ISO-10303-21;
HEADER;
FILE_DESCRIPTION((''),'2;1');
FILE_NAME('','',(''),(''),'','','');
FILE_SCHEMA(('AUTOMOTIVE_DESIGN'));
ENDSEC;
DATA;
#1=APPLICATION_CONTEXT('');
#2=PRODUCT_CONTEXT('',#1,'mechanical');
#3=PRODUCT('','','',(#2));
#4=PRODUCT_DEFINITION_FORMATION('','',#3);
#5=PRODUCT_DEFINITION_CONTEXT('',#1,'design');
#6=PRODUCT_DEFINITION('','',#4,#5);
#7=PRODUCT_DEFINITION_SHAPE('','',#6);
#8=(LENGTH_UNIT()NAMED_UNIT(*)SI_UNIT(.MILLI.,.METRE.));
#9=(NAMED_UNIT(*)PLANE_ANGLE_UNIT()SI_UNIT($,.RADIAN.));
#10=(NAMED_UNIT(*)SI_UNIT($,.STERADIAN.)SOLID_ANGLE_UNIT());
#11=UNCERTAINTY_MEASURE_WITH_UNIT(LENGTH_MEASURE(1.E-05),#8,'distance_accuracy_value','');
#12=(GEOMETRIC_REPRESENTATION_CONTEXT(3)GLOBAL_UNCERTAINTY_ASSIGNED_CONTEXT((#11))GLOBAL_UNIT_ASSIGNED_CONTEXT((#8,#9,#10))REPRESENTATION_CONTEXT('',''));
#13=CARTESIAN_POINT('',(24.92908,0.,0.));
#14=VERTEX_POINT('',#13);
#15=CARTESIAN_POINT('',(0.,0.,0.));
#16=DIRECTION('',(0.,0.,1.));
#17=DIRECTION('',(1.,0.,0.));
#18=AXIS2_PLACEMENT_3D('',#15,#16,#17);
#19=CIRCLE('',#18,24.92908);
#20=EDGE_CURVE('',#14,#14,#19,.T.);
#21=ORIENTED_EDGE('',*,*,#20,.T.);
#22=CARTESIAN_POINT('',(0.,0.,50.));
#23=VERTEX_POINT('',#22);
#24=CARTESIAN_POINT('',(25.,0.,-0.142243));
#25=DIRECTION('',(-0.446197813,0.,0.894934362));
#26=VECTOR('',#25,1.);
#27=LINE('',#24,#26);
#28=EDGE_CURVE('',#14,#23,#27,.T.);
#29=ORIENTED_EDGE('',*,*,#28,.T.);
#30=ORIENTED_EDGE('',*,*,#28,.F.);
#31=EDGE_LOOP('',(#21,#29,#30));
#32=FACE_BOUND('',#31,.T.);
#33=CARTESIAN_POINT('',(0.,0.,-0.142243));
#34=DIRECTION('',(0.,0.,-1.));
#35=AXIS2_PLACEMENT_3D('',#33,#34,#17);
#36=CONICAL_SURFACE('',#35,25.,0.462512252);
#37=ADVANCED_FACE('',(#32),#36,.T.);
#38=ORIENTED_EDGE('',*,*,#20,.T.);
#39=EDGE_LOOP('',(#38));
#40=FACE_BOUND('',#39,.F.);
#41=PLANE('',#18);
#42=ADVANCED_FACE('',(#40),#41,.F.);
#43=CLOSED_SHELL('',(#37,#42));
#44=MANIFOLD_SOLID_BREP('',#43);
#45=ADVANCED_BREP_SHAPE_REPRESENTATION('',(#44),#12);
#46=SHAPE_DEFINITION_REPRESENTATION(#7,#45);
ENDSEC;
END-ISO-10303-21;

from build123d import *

# Parameters (mm, degrees)
F0_R     = 25
F1_DEPTH = 50


# Not quite as in the source:
# - a fillet or chamfer that OpenCascade refuses, or shapes differently, is made with other operations: its cross-section is extruded or revolved along the edge and cut away or added


with BuildPart() as f1:
    # F0 (on Top) → F1 (new body)
    with BuildSketch(Plane.XY):
        Circle(F0_R)
    extrude(amount=F1_DEPTH)

    # F2: chamfer of 25 x 50.1422427065 on 1 edges, made by hand

    # F2_s1 → F2_t2 (revolve, cut)
    with BuildSketch(Plane.XZ):
        Polygon((25, -0.1422427065), (0, 50), (25, 50), align=None)
    revolve(axis=Axis((0, 0, 50), (0, 0, 1)), mode=Mode.SUBTRACT)


solid = f1.part
